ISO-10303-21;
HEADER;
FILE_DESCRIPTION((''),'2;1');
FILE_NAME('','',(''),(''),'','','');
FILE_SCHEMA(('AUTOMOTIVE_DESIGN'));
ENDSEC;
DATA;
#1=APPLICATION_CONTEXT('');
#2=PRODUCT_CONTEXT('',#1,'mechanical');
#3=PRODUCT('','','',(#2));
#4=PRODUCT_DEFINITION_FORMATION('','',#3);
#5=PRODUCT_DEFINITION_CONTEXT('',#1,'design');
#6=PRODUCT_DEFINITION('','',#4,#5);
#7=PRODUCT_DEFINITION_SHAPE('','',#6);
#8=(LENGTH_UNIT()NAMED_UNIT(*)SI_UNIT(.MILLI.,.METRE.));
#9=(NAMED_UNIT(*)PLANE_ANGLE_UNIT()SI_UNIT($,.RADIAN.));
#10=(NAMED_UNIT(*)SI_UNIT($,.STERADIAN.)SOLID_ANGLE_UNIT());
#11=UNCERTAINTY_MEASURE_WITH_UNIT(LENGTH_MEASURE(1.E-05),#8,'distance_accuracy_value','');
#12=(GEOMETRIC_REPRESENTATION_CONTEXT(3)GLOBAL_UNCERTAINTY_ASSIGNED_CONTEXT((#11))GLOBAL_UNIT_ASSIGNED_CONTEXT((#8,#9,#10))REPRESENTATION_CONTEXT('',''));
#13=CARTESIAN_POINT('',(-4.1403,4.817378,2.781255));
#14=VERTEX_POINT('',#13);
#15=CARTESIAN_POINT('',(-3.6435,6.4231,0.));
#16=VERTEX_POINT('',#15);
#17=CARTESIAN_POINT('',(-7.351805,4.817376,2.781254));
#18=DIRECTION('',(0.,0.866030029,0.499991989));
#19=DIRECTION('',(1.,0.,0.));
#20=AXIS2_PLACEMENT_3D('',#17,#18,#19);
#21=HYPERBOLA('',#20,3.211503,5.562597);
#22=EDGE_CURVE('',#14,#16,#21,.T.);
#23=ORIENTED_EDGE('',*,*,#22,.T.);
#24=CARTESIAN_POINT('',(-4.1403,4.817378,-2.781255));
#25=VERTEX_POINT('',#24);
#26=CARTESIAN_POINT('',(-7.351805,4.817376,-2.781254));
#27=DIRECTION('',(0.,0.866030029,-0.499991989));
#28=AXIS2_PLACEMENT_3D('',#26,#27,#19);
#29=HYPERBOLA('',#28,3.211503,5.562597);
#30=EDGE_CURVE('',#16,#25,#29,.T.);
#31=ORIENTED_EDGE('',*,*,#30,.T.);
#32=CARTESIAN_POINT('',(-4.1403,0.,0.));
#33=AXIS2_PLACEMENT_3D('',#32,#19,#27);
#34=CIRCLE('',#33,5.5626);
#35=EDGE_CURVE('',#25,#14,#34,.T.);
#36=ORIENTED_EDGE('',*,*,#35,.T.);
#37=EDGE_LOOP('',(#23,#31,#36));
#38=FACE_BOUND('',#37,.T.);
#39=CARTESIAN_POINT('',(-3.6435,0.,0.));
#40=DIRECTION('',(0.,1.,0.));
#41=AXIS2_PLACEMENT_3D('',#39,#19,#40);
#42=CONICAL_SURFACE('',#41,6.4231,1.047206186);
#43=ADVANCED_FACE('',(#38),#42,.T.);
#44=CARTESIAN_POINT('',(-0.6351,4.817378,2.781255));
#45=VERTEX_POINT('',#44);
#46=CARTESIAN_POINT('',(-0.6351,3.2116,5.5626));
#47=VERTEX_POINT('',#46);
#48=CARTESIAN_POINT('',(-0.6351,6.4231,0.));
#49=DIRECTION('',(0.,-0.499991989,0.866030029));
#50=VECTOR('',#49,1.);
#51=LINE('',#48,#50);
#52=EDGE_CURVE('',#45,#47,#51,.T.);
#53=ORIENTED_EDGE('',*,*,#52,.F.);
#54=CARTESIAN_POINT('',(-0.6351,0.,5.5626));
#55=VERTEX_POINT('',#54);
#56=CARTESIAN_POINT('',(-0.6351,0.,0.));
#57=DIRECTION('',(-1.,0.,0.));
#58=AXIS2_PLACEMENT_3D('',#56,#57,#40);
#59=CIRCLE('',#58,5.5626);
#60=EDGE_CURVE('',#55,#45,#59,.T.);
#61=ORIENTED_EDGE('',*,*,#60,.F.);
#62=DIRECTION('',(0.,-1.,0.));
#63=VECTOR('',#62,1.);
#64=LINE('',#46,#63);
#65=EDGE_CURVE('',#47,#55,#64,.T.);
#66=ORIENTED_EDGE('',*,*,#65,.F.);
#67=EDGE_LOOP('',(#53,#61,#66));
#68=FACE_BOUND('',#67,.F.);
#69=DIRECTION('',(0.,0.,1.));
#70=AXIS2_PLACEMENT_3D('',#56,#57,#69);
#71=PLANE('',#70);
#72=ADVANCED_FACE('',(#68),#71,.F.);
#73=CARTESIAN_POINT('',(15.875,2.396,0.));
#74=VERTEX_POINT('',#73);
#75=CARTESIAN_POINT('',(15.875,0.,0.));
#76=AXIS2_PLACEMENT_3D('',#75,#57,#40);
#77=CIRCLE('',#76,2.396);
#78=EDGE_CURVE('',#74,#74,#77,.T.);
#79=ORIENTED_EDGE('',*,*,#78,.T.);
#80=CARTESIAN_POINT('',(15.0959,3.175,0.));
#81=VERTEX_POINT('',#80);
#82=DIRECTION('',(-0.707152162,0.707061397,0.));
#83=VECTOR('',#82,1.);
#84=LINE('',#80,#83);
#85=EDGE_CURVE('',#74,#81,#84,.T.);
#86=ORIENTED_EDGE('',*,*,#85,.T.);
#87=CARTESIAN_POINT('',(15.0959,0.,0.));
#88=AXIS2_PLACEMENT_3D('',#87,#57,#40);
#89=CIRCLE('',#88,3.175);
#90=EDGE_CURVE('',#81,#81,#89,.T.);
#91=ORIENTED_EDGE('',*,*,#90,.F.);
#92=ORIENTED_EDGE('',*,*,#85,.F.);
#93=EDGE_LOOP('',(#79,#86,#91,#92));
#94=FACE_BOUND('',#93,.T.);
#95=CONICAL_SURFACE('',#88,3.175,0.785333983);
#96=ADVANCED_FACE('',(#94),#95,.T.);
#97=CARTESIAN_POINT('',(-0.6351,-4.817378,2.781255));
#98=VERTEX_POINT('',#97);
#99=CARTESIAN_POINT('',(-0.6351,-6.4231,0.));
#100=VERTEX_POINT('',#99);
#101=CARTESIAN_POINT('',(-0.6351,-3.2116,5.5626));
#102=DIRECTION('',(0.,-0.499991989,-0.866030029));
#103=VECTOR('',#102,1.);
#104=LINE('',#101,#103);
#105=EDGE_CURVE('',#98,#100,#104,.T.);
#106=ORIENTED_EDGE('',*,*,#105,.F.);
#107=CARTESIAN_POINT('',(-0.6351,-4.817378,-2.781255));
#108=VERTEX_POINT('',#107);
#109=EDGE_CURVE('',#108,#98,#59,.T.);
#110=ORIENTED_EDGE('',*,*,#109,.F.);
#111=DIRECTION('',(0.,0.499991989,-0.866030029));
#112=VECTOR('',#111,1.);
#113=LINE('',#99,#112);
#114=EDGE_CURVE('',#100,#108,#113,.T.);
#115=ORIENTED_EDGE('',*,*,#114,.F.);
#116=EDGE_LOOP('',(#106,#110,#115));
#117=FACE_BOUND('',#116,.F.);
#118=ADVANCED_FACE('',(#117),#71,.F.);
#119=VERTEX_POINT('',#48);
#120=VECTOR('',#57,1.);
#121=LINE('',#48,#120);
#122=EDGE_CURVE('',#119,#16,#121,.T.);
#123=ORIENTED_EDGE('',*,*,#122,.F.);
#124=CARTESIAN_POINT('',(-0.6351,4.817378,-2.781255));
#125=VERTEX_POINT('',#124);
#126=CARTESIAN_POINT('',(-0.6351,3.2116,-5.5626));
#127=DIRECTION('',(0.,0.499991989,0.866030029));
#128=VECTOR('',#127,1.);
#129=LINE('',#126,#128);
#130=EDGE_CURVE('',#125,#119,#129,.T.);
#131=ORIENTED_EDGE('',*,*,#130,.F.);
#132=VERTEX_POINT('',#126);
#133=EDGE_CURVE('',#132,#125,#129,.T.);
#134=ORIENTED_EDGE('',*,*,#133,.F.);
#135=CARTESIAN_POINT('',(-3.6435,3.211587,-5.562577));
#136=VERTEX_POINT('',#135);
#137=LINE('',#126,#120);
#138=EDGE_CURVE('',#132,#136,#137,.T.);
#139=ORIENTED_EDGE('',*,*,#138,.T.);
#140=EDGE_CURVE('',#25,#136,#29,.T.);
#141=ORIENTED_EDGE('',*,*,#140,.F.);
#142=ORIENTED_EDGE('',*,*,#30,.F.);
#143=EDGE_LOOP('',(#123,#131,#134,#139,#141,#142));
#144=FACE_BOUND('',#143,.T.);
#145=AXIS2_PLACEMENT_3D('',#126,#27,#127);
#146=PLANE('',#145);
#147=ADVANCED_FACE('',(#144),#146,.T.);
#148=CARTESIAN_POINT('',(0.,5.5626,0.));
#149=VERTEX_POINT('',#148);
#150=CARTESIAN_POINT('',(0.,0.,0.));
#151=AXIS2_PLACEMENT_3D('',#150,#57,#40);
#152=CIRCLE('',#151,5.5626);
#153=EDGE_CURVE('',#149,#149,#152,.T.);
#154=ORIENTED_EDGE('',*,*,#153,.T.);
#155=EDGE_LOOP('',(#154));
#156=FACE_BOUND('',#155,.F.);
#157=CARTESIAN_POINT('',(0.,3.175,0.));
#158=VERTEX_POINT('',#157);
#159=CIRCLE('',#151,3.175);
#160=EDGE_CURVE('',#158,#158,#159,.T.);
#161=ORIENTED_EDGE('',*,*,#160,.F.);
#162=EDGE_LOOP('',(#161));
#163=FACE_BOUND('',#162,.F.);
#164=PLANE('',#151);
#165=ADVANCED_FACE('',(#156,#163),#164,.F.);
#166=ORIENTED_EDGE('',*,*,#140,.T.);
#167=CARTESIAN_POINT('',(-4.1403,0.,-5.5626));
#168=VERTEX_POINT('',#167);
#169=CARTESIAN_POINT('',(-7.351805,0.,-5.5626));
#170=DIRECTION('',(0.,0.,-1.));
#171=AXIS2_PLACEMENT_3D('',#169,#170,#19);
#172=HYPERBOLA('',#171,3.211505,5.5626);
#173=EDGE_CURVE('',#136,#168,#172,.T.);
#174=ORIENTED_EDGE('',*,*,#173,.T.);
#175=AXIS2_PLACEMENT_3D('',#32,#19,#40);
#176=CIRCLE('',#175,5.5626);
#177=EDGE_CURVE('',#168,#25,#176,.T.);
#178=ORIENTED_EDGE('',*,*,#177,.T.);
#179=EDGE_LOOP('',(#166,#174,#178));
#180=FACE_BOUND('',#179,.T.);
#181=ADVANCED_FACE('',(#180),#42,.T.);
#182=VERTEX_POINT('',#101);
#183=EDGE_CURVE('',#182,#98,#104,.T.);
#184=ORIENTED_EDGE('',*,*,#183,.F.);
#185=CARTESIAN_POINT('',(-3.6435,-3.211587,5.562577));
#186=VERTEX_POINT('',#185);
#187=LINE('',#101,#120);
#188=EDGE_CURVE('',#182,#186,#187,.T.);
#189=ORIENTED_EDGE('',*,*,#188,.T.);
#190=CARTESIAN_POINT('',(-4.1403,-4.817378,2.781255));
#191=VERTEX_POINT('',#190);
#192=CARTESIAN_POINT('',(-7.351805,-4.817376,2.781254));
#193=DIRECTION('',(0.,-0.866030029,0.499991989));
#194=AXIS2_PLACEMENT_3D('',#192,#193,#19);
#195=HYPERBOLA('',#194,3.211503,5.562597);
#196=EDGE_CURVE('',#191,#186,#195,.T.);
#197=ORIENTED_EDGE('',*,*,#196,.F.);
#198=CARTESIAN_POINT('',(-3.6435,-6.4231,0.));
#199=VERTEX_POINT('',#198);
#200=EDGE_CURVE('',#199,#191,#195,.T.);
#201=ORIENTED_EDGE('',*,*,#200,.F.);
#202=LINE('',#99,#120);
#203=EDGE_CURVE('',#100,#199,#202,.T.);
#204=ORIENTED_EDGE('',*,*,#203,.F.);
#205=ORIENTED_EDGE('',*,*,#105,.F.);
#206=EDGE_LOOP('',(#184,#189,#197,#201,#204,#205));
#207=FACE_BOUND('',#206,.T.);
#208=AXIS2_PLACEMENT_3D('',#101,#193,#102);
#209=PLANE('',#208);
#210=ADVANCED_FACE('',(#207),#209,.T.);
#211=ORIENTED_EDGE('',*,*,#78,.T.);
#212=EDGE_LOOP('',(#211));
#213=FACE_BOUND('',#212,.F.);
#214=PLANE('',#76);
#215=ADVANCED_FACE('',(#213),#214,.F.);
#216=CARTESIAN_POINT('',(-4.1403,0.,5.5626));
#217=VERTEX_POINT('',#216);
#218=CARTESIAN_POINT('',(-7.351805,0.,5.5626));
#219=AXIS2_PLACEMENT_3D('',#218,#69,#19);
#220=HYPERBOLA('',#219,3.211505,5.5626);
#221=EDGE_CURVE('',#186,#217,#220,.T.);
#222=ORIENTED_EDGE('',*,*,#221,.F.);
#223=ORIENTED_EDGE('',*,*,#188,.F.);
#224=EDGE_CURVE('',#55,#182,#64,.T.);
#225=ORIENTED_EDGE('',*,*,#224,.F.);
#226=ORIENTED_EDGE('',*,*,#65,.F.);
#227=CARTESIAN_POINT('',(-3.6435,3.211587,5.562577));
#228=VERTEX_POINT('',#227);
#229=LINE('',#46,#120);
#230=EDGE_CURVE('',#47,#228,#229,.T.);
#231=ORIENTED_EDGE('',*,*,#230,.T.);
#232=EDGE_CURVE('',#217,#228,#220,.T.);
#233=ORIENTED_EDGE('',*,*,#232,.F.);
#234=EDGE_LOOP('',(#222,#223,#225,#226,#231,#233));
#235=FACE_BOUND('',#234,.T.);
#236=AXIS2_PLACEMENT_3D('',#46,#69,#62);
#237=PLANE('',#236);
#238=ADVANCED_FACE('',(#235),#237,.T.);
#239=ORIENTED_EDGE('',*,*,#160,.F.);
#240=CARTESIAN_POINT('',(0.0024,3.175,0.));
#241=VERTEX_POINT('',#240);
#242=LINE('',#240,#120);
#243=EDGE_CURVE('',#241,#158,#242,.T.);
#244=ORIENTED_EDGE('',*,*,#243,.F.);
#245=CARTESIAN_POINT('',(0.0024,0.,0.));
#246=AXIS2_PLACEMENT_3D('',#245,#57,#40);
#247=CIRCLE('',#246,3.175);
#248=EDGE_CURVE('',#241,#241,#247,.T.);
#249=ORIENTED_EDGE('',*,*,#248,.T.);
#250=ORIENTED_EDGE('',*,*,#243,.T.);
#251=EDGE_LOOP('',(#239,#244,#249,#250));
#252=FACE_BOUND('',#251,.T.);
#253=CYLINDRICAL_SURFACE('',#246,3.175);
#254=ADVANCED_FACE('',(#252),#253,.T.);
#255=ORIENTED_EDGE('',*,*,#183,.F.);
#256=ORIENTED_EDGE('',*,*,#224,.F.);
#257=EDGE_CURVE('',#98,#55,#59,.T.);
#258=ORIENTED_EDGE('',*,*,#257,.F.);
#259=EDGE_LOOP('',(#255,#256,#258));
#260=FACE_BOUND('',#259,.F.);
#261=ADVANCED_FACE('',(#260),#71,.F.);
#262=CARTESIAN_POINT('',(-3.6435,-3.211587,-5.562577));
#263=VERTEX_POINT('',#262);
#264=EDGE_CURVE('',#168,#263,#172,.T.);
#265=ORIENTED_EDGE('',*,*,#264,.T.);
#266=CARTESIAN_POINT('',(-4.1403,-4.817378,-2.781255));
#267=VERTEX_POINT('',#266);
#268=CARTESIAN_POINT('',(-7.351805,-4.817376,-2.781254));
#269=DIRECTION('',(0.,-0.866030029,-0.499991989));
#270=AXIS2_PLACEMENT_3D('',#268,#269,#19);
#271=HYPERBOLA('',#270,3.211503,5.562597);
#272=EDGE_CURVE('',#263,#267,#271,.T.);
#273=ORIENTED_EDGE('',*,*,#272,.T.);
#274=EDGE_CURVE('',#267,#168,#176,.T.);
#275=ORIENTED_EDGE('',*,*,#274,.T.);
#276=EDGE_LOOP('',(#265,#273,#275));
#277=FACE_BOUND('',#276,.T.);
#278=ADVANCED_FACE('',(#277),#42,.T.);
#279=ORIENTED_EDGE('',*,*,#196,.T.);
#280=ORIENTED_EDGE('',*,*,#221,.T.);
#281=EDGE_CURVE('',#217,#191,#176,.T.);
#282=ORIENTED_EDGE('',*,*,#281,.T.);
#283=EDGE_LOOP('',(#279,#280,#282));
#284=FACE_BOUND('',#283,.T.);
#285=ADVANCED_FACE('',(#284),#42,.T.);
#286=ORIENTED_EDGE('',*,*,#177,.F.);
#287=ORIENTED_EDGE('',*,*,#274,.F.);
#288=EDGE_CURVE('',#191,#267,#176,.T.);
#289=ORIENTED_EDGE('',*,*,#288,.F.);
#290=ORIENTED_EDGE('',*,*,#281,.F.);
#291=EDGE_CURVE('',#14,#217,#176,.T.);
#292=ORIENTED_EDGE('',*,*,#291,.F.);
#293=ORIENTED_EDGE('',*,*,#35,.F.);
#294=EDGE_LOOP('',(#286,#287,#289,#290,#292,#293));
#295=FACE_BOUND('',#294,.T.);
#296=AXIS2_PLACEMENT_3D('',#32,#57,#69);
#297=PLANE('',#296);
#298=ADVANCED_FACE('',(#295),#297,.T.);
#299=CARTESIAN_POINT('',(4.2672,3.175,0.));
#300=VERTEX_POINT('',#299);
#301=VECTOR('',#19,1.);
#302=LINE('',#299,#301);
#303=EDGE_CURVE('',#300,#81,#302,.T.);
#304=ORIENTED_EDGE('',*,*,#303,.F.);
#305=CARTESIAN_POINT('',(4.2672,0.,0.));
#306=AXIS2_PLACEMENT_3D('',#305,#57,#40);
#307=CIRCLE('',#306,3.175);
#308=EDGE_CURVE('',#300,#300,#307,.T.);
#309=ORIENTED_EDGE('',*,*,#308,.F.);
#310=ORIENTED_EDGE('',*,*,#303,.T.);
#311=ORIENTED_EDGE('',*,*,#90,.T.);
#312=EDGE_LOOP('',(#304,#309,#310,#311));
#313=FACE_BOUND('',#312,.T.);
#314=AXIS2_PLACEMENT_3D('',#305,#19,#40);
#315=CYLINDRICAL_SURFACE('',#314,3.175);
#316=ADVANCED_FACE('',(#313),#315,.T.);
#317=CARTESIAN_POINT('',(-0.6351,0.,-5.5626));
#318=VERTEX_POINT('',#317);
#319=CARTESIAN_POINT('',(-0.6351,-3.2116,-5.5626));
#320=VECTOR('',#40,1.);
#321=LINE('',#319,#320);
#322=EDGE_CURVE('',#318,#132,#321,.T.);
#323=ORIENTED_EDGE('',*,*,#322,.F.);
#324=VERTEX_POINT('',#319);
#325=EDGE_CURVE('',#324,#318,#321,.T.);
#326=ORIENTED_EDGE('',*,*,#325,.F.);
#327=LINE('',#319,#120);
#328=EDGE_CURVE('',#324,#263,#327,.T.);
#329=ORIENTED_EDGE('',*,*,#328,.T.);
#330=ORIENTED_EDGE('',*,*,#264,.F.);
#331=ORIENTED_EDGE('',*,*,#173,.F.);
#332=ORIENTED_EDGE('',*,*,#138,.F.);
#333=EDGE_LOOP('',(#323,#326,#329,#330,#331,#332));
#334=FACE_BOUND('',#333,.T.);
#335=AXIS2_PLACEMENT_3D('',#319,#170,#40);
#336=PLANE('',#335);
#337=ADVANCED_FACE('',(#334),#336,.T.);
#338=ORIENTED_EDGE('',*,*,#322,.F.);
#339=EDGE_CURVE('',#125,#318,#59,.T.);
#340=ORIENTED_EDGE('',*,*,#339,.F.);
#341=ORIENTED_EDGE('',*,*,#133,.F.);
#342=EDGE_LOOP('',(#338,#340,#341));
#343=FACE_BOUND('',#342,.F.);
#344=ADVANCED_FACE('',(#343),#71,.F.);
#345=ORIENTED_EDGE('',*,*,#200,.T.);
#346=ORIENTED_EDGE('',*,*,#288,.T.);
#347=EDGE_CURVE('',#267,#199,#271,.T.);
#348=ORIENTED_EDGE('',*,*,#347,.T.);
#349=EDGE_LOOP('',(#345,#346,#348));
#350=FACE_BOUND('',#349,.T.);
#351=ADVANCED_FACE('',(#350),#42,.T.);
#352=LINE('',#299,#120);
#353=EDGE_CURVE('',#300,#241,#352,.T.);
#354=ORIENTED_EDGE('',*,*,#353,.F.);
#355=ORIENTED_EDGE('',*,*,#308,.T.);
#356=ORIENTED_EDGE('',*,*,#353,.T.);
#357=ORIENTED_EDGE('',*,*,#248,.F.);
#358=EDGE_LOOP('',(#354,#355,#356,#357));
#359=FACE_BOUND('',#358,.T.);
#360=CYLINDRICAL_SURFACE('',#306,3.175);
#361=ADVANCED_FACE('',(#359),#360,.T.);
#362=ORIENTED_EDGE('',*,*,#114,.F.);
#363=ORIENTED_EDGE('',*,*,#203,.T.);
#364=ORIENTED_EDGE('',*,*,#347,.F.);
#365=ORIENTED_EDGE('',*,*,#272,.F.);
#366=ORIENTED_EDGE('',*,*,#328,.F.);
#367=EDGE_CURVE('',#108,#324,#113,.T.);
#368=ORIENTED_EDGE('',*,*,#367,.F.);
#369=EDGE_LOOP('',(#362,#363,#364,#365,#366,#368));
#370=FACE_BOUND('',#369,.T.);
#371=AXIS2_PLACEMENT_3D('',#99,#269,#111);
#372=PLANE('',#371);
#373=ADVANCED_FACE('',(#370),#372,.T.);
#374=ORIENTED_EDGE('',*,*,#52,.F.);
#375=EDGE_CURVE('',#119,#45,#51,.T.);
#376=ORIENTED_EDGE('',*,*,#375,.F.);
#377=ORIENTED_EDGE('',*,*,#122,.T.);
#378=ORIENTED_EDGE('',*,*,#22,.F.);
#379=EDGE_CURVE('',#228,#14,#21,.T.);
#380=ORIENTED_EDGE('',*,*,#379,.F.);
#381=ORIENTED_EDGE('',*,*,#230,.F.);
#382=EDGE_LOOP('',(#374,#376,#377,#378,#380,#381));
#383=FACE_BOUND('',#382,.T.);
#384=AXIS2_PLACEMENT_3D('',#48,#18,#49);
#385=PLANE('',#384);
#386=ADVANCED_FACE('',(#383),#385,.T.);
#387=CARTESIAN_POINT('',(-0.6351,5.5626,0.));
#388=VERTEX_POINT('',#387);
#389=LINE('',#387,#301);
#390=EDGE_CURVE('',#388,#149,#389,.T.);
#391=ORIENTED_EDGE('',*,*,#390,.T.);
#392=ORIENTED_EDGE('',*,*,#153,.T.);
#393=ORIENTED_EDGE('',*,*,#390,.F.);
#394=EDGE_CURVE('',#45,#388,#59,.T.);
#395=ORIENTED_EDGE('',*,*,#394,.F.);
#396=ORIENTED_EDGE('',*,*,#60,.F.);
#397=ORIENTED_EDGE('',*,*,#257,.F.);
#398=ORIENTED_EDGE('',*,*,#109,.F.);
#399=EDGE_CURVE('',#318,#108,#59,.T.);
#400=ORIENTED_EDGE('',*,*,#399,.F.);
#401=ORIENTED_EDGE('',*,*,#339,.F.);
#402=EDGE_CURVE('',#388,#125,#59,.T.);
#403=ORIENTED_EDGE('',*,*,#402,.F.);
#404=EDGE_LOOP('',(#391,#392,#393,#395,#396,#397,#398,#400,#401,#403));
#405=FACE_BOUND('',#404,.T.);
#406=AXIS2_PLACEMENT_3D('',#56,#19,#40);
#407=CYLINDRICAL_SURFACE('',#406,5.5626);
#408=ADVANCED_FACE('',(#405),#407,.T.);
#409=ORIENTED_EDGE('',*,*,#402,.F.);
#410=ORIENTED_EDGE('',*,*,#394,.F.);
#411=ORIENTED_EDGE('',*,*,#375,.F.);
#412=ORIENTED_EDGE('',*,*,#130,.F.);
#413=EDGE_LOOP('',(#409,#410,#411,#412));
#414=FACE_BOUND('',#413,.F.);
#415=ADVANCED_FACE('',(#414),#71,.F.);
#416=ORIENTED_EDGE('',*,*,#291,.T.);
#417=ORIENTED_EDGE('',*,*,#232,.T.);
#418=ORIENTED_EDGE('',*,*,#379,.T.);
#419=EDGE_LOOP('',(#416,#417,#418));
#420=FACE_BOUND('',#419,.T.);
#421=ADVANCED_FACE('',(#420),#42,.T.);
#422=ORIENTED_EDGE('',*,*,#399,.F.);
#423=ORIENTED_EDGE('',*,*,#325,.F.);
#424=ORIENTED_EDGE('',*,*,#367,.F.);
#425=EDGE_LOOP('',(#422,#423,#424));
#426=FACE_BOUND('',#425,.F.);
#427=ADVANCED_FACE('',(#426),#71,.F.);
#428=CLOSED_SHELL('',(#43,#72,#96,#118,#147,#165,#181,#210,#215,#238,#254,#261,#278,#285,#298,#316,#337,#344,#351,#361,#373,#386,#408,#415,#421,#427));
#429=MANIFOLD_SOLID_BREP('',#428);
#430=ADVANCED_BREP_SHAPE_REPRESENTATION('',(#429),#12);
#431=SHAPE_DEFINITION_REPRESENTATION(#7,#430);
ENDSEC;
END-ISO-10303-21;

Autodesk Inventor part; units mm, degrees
ref_plane "YZ Plane" through (0, 0, 0) normal (1, 0, 0) x (0, 1, 0)
ref_plane "XZ Plane" through (0, 0, 0) normal (0, 1, 0) x (-1, 0, 0)
sketch "Sketch1" plane through (0, 0, 0) normal (0, 0, 1) x (1, 0, 0)
  line L0 (0, 5.5626) -> (0, 3.175)
  line L1 (4.2672, 3.175) -> (15.875, 3.175)
  line L2 (15.875, 3.175) -> (15.875, 0)
  line L3 (15.875, 0) -> (-0.6351, 0)
  line L4 (-3.9371, 0) -> (19.177, 0) projected
  line L5 (-0.6351, 0) -> (-0.6351, 5.5626)
  line L6 (-0.6351, 5.5626) -> (0, 5.5626)
  line L7 (4.2672, 3.175) -> (0.0024, 3.175)
  line L8 (0.0024, 3.175) -> (0, 3.175)
  line L9 (0, -1.1125) -> (0, 6.6751) projected
  dimension "d0" = 15.875
  dimension "d1" = 11.6078
  dimension "d2" = 6.35
  dimension "d9" = 0.6351
  dimension "d10" = 11.1252
  dimension "d13" = 4.2648
  dimension "d14" = 6.35
revolve "Body" add sketch "Sketch1" angle 360 about axis through (15.875, 0, 0) along (-1, 0, 0)
sketch "Sketch2" plane through (-0.6351, 0, 0) normal (-1, 0, 0) x (0, 0, 1)
  line L0 (0, 6.4231) -> (5.5626, 3.2116)
  line L1 (5.5626, 3.2116) -> (5.5626, -3.2116)
  line L2 (5.5626, -3.2116) -> (0, -6.4231)
  line L3 (0, -6.4231) -> (-5.5626, -3.2116)
  line L4 (-5.5626, -3.2116) -> (-5.5626, 3.2116)
  line L5 (-5.5626, 3.2116) -> (0, 6.4231)
  point P0 (0, 0)
  point P1 (0, 0)
  dimension "d11" = 11.1252
extrude "Head" add sketch "Sketch2" along normal blind 3.5052
sketch "Sketch4" plane through (0, 0, 0) normal (0, 0, 1) x (1, 0, 0)
  line L0 (-4.1403, 5.5626) -> (-4.1403, 6.4231)
  line L1 (-4.1403, 6.4231) -> (-3.6435, 6.4231)
  line L2 (-3.6435, 6.4231) -> (-4.1403, 5.5626)
  line L3 (-4.8413, 0) -> (0.0659, 0) projected
  line L4 (-0.6351, 6.4231) -> (-4.1403, 6.4231) projected
  line L5 (-4.1403, 3.2116) -> (-4.1403, 6.4231) projected
  dimension "d5" = 30
  dimension "d19" = 11.1252
revolve "Chamfer1" cut sketch "Sketch4" angle 360 about axis through (-10, 0, 0) along (1, 0, 0)
thread "Thread" size "1/4-20 UNC" class "2A" standard "ANSI Unified Screw Threads" length 11.6078
chamfer "Chamfer2" distance 0.779 distance2 0.7791 1 edges at (15.875, -3.175, 0) measured on face at (15.875, -0.5663, 0.5832)
ref_plane "Work Plane1" through (1.525, 0, 0) normal (0, 0, 1) x (1, 0, 0)
equation "\"d0\" = NLG"
equation "\"d1\" = GEL"
equation "\"d2\" = GD"
equation "\"d10\" = SD2"
equation "\"d14\" = BDM"
equation "\"d11\" = SW"
equation "\"d3\" = KOH - SD"
equation "\"d5\" = ANG1"
equation "\"d19\" = SW0"
equation "\"d15\" = GEL"
equation "\"d6\" = -0.5 * SPD + 0.5 * GD"
equation "\"NLG\" = 15.875"
equation "\"GD\" = 6.35"
equation "\"BDM\" = 6.35"
equation "\"KOH\" = 4.1402"
equation "\"GEL\" = 11.6078"
equation "\"SW\" = 11.1252"
equation "\"SW0\" = SW"
equation "\"SPD\" = GD1"
equation "\"SD2\" = SW"
equation "\"SD\" = 0.635"
equation "\"ANG1\" = 30deg"
equation "\"GAL\" = 4.26466"
equation "\"GUL\" = 0.77902"
equation "\"RR\" = 0.381"
equation "\"WFT\" = SD"
equation "\"GD1\" = 4.79196"
equation "\"THREADDIA\" = 6.35"
equation "\"SDH\" = SW"
equation "\"SDHG\" = 0.00254"
equation "\"TOA\" = 30deg"
equation "\"FAWI\" = 45deg"
equation "\"NND\" = 6.35"
equation "\"E0\" = 12.84961"
properties part number "AS 2465 - 1/4 x 5/8  UNC" material "Steel, Mild"
